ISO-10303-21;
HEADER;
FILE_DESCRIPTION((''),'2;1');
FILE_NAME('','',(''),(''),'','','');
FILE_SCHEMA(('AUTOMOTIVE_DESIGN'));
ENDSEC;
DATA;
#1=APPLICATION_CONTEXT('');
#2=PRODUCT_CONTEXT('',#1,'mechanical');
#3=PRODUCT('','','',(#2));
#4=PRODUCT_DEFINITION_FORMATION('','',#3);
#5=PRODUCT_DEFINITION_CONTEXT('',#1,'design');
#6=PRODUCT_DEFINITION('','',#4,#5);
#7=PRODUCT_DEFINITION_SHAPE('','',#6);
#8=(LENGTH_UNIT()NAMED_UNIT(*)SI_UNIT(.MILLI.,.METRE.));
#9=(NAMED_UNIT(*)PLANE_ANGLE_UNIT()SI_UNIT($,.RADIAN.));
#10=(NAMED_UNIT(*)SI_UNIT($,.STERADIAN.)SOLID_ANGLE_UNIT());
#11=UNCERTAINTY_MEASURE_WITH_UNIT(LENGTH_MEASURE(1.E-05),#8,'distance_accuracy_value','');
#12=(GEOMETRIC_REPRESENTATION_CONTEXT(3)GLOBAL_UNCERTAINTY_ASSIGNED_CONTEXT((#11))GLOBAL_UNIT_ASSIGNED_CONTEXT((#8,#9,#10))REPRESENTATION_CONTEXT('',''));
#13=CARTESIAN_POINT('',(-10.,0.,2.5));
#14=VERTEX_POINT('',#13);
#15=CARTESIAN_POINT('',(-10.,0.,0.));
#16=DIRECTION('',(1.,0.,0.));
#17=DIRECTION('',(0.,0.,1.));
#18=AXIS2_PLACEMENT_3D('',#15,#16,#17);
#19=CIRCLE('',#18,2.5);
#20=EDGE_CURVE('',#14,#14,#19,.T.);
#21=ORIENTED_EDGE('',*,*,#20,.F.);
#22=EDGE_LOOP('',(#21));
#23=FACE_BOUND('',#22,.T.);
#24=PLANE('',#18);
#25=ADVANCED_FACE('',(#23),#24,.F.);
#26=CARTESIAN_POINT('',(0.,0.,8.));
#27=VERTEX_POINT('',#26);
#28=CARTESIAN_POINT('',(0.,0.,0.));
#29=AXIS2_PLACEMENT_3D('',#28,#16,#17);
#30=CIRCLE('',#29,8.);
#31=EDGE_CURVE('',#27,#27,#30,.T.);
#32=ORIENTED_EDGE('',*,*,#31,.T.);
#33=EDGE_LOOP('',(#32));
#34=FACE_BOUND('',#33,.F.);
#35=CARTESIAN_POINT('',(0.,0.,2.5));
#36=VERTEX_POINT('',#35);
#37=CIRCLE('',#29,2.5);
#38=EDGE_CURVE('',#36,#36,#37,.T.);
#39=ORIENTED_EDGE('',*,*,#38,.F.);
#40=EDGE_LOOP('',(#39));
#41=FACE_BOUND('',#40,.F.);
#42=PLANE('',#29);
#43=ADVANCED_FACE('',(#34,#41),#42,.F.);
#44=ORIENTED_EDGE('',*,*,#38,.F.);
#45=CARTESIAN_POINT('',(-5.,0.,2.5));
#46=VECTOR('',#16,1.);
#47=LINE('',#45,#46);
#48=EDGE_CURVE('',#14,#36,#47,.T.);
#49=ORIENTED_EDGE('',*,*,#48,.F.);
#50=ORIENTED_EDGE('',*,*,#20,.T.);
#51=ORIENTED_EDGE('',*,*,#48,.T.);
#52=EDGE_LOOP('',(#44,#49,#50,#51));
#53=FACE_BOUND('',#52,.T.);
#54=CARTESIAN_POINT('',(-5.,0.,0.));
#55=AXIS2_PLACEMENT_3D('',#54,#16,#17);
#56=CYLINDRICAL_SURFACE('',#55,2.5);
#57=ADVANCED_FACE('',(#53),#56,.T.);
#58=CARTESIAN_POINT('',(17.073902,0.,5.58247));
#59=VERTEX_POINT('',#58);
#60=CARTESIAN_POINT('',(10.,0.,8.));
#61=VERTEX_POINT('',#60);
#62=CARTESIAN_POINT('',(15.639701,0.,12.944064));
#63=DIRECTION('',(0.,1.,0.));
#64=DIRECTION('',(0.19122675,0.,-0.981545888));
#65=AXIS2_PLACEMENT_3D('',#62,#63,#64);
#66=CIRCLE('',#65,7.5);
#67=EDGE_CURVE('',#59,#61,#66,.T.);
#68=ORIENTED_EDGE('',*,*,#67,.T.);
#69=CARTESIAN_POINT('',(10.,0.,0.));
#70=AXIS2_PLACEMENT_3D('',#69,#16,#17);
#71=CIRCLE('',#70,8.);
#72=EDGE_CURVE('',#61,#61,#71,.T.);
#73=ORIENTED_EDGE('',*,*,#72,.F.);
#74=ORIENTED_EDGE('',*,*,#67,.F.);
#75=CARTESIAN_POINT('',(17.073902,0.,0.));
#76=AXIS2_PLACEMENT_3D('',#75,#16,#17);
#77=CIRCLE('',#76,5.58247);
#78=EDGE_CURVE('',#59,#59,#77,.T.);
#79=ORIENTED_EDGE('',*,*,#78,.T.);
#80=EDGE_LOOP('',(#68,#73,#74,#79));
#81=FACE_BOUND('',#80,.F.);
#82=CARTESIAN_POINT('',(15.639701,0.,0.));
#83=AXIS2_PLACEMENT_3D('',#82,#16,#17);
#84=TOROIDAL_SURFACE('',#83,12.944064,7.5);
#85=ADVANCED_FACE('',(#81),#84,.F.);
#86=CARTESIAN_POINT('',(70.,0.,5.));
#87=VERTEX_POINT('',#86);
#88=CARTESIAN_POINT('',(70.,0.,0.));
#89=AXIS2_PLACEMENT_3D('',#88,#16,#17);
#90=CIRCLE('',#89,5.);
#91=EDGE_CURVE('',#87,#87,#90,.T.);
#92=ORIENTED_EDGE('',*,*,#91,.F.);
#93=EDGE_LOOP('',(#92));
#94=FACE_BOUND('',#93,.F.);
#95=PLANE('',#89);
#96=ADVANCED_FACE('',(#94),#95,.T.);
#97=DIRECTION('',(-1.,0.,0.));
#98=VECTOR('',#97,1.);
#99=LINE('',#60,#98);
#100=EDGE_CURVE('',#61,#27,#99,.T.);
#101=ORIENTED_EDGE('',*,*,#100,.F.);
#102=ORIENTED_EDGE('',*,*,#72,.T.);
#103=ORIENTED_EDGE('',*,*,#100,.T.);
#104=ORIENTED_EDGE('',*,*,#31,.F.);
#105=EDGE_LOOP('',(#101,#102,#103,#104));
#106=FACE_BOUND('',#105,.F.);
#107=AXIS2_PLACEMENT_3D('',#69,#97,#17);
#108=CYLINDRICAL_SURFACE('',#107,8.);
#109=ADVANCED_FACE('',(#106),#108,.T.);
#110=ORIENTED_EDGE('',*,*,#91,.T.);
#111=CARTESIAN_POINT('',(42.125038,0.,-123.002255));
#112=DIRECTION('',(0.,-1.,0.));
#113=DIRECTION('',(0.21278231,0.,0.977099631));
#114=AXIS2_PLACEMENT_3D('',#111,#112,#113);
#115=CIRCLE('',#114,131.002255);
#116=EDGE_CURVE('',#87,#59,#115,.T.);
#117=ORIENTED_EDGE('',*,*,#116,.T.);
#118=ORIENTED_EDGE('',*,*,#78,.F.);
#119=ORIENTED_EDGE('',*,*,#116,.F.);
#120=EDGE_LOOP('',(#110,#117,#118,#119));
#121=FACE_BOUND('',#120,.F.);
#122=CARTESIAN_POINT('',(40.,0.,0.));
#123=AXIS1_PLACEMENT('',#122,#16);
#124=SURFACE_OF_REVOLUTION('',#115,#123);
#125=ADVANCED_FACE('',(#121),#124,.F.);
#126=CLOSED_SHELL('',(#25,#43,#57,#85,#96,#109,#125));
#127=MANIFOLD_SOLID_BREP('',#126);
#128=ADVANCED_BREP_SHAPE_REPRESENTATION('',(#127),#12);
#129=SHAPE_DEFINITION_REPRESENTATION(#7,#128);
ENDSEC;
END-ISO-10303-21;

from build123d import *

# Parameters (mm, degrees)
F0_W = 10
F0_H = 2.5


# Not quite as in the source:
# - a fillet or chamfer that OpenCascade refuses, or shapes differently, is made with other operations: its cross-section is extruded or revolved along the edge and cut away or added


with BuildPart() as f1:
    # F0 (on Front) → F1 (revolve)
    with BuildSketch(Plane.XZ):
        with Locations((-5, 1.25)):
            Rectangle(F0_W, F0_H)
        Polygon((0, 8), (0, 2.5), (0, 0), (10, 0), (10, 4), (10, 8), align=None)
        with BuildLine():
            Line((10, 4), (10, 0))
            Line((10, 0), (70, 0))
            Line((70, 0), (70, 5))
            ThreePointArc((70, 5), (39.9419698495, 7.9818090321), (10, 4))
        make_face()
    revolve(axis=Axis((40, 0, 0), (1, 0, 0)))

    # F2: fillet of radius 7.5 on 1 edges, made by hand

    # F2_s1 → F2_t2 (revolve)
    with BuildSketch(Plane.XZ):
        with BuildLine():
            ThreePointArc((17.0739020896, 5.582469697), (13.2142793321, 5.8470695986), (10, 8))
            Line((10, 8), (10, 4))
            ThreePointArc((10, 4), (13.5260036045, 4.8401717227), (17.0739020896, 5.582469697))
        make_face()
    revolve(axis=Axis((10, 0, 0), (1, 0, 0)))


solid = f1.part
